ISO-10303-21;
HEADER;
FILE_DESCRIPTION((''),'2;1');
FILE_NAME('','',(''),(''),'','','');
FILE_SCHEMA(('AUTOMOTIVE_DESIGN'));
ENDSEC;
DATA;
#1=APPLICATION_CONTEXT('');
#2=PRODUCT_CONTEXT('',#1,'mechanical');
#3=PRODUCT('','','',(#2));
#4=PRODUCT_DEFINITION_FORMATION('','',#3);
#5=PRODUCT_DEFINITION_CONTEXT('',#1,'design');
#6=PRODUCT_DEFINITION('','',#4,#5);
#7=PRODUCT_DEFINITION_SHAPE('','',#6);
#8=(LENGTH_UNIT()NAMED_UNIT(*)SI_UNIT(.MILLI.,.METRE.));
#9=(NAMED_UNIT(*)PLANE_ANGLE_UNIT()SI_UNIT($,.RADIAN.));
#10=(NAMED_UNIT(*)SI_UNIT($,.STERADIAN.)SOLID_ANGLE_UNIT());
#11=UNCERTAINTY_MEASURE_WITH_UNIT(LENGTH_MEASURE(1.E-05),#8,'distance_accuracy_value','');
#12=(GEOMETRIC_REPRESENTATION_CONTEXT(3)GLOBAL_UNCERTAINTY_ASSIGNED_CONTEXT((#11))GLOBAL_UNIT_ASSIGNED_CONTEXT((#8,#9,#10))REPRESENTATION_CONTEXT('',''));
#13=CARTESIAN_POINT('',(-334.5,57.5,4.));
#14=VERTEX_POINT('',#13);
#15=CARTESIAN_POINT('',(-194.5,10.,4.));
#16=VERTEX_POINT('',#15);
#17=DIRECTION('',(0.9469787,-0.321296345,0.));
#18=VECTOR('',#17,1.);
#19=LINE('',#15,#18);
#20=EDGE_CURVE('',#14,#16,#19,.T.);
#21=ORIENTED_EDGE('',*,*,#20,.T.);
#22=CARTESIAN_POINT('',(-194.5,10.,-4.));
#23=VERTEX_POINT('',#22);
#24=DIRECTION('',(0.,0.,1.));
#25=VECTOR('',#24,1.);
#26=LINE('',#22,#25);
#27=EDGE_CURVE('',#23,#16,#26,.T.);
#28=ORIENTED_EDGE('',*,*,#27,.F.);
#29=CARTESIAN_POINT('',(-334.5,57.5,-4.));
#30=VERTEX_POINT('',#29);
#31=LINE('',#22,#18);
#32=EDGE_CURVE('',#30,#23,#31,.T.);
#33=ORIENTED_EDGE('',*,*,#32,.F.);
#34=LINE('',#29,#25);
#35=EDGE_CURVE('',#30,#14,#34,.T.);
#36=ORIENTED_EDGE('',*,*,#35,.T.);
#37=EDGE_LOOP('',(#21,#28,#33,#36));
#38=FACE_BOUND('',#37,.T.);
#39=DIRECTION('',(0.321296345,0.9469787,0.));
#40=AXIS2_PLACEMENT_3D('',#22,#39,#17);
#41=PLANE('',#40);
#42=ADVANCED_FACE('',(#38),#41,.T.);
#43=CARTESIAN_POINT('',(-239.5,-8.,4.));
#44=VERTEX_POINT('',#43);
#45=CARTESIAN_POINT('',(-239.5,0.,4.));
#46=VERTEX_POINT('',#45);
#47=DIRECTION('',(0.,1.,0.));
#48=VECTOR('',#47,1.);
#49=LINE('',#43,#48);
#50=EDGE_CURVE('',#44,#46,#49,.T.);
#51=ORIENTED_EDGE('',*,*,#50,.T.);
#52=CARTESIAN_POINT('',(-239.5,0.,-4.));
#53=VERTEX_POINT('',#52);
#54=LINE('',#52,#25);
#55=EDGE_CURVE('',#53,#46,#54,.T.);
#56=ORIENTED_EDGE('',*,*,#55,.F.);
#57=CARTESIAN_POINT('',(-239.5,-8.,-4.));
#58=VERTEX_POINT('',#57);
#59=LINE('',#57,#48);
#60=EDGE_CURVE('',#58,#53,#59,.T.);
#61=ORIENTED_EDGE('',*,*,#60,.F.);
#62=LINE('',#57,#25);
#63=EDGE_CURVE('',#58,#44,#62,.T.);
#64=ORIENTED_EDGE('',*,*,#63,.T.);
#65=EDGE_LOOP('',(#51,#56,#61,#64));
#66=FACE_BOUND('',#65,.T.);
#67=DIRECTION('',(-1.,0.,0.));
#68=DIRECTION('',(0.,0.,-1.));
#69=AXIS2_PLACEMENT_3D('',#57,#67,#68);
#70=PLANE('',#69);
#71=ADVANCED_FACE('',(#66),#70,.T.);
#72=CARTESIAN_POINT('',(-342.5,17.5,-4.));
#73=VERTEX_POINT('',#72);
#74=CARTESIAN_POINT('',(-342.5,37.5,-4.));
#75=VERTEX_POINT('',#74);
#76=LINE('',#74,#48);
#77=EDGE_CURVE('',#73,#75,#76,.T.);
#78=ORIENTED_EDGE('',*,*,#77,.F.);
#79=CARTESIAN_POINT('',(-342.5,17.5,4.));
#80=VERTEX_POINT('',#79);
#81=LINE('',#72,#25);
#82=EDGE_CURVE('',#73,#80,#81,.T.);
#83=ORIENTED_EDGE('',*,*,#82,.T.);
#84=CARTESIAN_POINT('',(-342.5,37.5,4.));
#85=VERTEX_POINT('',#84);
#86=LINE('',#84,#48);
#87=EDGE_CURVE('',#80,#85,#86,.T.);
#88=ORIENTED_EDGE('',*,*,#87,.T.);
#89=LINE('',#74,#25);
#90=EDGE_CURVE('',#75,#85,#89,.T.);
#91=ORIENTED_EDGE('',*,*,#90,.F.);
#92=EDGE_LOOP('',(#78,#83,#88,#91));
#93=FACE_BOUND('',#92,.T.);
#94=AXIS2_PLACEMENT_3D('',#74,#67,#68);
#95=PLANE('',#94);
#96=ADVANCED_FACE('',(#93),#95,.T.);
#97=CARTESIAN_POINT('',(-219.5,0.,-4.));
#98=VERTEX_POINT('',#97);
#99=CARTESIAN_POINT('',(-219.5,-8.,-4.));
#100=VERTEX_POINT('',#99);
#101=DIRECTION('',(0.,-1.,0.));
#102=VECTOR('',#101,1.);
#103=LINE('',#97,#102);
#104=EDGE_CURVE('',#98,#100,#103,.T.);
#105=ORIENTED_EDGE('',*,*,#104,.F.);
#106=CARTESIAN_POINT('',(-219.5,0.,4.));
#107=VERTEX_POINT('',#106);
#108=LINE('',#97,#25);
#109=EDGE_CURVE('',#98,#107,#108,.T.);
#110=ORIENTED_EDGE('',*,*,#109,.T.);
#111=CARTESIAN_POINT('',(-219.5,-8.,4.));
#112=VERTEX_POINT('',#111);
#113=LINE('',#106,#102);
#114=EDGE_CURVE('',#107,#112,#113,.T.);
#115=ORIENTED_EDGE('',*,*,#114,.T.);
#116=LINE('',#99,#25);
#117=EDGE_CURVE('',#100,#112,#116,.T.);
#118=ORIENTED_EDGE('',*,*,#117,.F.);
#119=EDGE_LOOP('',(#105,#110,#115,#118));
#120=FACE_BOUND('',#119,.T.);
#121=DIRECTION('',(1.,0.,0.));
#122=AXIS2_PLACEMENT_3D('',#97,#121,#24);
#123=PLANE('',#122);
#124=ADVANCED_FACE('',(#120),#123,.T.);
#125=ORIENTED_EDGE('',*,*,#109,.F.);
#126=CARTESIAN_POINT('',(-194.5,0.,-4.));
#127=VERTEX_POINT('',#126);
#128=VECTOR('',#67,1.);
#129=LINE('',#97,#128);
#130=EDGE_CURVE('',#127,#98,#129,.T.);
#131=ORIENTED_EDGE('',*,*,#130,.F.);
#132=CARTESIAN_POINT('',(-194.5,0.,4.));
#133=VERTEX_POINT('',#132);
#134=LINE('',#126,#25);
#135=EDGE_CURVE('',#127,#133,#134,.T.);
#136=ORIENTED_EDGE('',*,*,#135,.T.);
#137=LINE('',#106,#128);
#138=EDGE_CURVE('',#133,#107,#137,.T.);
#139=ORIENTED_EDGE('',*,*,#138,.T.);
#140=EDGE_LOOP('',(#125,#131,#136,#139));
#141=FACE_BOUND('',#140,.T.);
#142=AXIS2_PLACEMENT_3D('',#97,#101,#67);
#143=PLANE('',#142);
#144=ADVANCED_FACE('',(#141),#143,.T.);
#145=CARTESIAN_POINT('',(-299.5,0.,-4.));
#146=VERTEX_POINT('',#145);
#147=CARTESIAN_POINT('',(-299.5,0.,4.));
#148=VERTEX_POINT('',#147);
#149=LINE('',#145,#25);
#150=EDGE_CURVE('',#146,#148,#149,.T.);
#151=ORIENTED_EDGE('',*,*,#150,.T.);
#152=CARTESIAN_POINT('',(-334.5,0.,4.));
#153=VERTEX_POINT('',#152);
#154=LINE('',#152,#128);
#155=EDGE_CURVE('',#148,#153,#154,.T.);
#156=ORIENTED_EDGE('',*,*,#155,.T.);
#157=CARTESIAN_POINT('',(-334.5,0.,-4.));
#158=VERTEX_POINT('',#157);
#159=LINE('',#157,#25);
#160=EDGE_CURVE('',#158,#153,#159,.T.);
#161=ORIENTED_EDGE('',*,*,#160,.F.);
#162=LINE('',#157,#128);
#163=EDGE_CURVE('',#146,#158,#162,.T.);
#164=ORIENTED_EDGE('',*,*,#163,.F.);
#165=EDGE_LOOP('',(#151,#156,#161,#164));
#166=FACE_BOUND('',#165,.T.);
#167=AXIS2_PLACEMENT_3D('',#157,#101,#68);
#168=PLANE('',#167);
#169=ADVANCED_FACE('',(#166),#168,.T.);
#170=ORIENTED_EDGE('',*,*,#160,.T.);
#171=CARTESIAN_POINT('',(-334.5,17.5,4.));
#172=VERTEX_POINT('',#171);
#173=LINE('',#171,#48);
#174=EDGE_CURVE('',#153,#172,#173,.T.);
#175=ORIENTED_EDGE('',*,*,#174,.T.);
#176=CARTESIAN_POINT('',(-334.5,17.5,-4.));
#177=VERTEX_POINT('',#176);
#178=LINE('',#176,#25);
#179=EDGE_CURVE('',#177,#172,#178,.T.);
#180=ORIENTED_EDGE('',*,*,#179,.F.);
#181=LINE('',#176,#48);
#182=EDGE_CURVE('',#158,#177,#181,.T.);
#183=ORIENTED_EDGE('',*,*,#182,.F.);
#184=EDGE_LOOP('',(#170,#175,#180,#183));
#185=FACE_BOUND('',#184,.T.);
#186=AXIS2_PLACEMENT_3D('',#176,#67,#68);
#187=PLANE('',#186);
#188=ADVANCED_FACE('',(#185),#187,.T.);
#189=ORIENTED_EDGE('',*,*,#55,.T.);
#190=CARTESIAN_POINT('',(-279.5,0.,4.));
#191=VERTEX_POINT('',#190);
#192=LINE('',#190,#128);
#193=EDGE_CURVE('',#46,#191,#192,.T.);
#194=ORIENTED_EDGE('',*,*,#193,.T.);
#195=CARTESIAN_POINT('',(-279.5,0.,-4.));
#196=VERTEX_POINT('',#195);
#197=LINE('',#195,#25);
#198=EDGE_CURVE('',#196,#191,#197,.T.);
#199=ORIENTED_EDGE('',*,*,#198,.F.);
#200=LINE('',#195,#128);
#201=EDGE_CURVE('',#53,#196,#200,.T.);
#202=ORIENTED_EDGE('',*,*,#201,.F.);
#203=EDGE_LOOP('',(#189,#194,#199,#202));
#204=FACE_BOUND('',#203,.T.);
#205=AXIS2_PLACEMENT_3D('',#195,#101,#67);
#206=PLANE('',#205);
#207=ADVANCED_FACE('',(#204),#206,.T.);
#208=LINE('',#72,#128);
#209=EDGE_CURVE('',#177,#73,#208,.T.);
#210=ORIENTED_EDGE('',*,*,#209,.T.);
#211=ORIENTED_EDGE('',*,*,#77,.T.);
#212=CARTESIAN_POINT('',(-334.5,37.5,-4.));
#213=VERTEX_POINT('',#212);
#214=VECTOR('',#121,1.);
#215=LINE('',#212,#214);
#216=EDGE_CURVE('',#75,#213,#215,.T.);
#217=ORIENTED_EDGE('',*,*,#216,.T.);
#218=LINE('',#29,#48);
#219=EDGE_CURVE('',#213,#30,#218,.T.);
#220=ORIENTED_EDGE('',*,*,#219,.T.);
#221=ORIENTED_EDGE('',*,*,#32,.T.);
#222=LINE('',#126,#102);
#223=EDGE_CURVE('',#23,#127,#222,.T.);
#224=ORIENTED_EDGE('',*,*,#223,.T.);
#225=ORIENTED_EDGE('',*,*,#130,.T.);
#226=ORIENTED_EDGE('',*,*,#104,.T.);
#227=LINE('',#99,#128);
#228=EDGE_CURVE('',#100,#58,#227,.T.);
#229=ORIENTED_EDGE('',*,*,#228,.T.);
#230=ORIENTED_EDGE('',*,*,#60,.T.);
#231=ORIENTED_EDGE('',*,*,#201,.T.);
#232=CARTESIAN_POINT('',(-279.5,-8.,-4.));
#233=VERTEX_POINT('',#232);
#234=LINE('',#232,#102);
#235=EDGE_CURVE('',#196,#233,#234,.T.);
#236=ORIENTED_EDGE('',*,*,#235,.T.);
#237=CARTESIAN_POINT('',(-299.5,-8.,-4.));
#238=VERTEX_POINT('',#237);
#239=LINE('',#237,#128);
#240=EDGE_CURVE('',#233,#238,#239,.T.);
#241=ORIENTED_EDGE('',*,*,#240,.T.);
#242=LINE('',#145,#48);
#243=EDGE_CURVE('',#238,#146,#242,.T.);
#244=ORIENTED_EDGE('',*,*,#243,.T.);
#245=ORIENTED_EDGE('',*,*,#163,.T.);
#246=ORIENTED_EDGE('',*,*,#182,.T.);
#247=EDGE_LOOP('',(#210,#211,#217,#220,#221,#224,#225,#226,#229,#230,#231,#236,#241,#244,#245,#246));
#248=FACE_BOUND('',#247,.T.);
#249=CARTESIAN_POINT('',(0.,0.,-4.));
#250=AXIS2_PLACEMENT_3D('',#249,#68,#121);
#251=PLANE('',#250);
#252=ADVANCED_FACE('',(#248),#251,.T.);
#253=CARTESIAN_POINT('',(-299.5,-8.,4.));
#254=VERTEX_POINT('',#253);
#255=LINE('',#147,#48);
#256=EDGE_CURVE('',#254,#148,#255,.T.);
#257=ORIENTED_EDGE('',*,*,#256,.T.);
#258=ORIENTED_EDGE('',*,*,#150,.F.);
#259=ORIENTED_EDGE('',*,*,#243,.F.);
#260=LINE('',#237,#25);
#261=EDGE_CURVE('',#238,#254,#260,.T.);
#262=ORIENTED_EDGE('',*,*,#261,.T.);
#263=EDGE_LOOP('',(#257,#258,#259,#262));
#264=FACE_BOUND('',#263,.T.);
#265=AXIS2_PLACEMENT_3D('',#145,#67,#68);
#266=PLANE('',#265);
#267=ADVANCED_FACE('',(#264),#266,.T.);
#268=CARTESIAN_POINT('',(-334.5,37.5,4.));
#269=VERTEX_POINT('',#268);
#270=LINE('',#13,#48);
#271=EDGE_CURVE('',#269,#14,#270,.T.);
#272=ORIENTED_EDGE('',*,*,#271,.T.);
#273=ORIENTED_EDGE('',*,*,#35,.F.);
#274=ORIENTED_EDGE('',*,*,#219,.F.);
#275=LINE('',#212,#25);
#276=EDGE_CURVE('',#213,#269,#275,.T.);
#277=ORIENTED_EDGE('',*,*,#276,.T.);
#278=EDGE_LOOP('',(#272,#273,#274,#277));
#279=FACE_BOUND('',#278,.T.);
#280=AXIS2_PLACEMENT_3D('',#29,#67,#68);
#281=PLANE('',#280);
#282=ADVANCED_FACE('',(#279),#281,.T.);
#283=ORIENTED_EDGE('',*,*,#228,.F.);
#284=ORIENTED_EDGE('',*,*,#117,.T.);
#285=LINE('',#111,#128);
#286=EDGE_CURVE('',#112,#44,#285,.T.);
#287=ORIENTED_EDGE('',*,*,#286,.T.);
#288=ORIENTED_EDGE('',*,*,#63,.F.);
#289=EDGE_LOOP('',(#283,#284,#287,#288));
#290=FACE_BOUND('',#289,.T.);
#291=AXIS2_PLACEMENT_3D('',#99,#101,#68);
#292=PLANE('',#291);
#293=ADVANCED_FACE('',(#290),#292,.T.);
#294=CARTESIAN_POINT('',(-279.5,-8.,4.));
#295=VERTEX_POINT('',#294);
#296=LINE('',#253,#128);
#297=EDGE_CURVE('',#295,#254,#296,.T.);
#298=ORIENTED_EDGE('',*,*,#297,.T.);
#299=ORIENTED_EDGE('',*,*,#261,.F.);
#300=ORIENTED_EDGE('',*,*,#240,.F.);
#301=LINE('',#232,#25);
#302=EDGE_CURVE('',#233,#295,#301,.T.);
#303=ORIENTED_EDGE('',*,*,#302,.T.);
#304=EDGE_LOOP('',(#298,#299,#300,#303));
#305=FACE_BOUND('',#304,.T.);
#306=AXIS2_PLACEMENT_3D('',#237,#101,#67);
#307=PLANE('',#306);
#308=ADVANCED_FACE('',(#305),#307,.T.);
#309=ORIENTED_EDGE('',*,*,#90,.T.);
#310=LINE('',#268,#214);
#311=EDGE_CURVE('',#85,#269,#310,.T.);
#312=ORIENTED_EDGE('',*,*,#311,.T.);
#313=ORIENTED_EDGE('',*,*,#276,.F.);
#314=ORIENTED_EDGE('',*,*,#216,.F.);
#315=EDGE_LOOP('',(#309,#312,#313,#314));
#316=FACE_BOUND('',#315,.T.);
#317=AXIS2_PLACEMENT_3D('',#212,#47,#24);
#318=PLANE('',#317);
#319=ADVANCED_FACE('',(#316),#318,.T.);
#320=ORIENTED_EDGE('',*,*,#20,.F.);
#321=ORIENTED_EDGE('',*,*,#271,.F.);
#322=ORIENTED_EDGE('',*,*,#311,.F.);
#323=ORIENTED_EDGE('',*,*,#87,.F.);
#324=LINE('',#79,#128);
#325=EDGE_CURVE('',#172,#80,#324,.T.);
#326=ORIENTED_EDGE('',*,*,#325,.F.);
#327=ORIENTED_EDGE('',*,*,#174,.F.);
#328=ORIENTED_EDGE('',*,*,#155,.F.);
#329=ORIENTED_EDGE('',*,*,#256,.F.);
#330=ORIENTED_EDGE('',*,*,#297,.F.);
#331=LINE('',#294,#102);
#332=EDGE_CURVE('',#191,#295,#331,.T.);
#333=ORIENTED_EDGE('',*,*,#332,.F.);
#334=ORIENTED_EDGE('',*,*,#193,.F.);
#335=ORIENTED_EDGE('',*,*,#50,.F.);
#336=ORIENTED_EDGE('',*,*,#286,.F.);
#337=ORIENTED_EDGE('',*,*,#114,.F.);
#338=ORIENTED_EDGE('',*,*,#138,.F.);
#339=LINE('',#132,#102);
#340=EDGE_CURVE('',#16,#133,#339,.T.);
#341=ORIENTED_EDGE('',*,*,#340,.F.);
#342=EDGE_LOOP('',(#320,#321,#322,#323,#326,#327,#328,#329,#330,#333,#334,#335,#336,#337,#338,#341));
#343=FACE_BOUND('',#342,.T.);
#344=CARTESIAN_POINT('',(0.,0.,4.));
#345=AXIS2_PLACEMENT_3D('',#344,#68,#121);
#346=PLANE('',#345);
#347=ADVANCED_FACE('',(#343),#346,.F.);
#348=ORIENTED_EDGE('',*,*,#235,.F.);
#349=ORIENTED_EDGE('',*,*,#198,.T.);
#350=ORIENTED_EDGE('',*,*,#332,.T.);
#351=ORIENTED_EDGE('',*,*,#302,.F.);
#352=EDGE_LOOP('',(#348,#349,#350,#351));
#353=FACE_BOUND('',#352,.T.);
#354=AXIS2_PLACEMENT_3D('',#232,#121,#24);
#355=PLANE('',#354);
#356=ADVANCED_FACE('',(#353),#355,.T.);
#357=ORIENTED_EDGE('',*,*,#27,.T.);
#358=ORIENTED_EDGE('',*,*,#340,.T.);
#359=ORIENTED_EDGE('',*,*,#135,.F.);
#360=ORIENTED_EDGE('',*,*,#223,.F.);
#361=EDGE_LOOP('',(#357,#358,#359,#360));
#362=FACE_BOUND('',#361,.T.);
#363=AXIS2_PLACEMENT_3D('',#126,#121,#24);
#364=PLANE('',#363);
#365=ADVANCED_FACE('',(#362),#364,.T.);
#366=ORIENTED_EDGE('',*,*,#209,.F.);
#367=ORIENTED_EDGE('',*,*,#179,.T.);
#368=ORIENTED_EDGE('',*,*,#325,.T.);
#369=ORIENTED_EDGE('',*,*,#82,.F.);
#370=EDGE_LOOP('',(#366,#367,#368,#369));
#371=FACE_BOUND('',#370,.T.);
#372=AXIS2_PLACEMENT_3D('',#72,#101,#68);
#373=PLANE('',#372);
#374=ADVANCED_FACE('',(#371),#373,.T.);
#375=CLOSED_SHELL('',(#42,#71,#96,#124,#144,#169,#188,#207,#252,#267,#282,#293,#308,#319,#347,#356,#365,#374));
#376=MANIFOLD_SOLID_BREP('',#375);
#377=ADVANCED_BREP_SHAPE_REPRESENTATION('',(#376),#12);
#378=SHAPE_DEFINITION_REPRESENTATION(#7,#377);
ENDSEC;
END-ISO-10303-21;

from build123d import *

# Parameters (mm, degrees)
SKETCH1_W           = 685
SKETCH1_H           = 250
BASE_FLANGE1_DEPTH  = 8
SKETCH6_W           = 60
SKETCH6_H           = 8
SKETCH6_W_2         = 70
EXTRUDE1_DEPTH      = 8
SKETCH7_W           = 250
SKETCH7_H           = 73.5
BASE_FLANGE2_DEPTH  = 8
SKETCH12_W          = 30.5
SKETCH12_H          = 8.5
EXTRUDE2_DEPTH      = 699.681794525
SKETCH14_W          = 250
SKETCH14_H          = 8
BASE_FLANGE3_DEPTH  = 50.5
SKETCH19_W          = 60
SKETCH19_H          = 8
SKETCH19_W_2        = 70
EXTRUDE3_DEPTH      = 8
BREAK_CORNER1_START = 41.5
BREAK_CORNER1_DEPTH = 8
EXTRUDE4_DEPTH      = 8
BASE_FLANGE4_DEPTH  = 8
SKETCH38_W          = 8.5
SKETCH38_H          = 20.5
EXTRUDE5_DEPTH      = 10
SKETCH39_W          = 20.5
SKETCH39_H          = 8.5
EXTRUDE6_DEPTH      = 10


# Read off the part's stored shape, not the designer's step: Break-Corner1
# Sheet-metal steps are written as plain solids
with BuildPart() as part:
    # Sketch1 → Base-Flange1 (new body)
    with BuildSketch(Plane(origin=(0, 0, 0), x_dir=(1, 0, 0), z_dir=(0, 1, 0))):
        Rectangle(SKETCH1_W, SKETCH1_H)
    extrude(amount=-BASE_FLANGE1_DEPTH)

    # Sketch6 → Extrude1 (cut)
    with BuildSketch(Plane(origin=(342.5, 0, 0), x_dir=(0, 0, -1), z_dir=(1, 0, 0))):
        with Locations((-95, -4)):
            Rectangle(SKETCH6_W, SKETCH6_H)
        with Locations((95, -4)):
            Rectangle(SKETCH6_W, SKETCH6_H)
        with Locations((0, -4)):
            Rectangle(SKETCH6_W_2, SKETCH6_H)
    extrude1 = extrude(amount=-EXTRUDE1_DEPTH, mode=Mode.SUBTRACT)

    # Mirror1: Extrude1 across plane
    add(extrude1.mirror(Plane(origin=(0, 0, 0), x_dir=(0, 0, 1), z_dir=(1, 0, 0))), mode=Mode.SUBTRACT)

    # Sketch39 → Extrude6 (cut)
    with BuildSketch(Plane.XZ.offset(8)):
        with Locations((289.5, 0)):
            Rectangle(SKETCH39_W, SKETCH39_H)
        with Locations((229.5, 0)):
            Rectangle(SKETCH39_W, SKETCH39_H)
        with Locations((-289.5, 0)):
            Rectangle(SKETCH39_W, SKETCH39_H)
        with Locations((-229.5, 0)):
            Rectangle(SKETCH39_W, SKETCH39_H)
    extrude(amount=-EXTRUDE6_DEPTH, mode=Mode.SUBTRACT)


with BuildPart() as body_2:
    # Sketch7 → Base-Flange2 (new body)
    with BuildSketch(Plane(origin=(334.5, 0, 0), x_dir=(0, 0, -1), z_dir=(1, 0, 0))):
        with Locations((0, 20.75)):
            Rectangle(SKETCH7_W, SKETCH7_H)
    extrude(amount=BASE_FLANGE2_DEPTH)

    # Sketch12 → Extrude2 (cut, through all)
    with BuildSketch(Plane(origin=(342.5, 0, 0), x_dir=(0, 0, -1), z_dir=(1, 0, 0))):
        with Locations((-50, -4)):
            Rectangle(SKETCH12_W, SKETCH12_H)
        with Locations((50, -4)):
            Rectangle(SKETCH12_W, SKETCH12_H)
        with Locations((50, 45.5)):
            Rectangle(SKETCH12_W, SKETCH12_H)
        with Locations((-50, 45.5)):
            Rectangle(SKETCH12_W, SKETCH12_H)
    extrude(amount=-EXTRUDE2_DEPTH, mode=Mode.SUBTRACT)

    # Sketch38 → Extrude5 (cut)
    with BuildSketch(Plane(origin=(342.5, 0, 0), x_dir=(0, 0, -1), z_dir=(1, 0, 0))):
        with Locations((0, 27.5)):
            Rectangle(SKETCH38_W, SKETCH38_H)
    extrude(amount=-EXTRUDE5_DEPTH, mode=Mode.SUBTRACT)


with BuildPart() as body_3:
    # Sketch14 → Base-Flange3 (new body)
    with BuildSketch(Plane.ZY.offset(-334.5)):
        with Locations((0, 45.5)):
            Rectangle(SKETCH14_W, SKETCH14_H)
    extrude(amount=-BASE_FLANGE3_DEPTH)

    # Sketch19 → Extrude3 (cut)
    with BuildSketch(Plane(origin=(342.5, 0, 0), x_dir=(0, 0, -1), z_dir=(1, 0, 0))):
        with Locations((95, 45.5)):
            Rectangle(SKETCH19_W, SKETCH19_H)
        with Locations((0, 45.5)):
            Rectangle(SKETCH19_W_2, SKETCH19_H)
        with Locations((-95, 45.5)):
            Rectangle(SKETCH19_W, SKETCH19_H)
    extrude(amount=-EXTRUDE3_DEPTH, mode=Mode.SUBTRACT)

    # Break-Corner1 outline → Break-Corner1 (cut)
    with BuildSketch(Plane(origin=(0, 0, 0), x_dir=(1, 0, 0), z_dir=(0, 1, 0)).offset(BREAK_CORNER1_START)):
        Polygon((385, -125), (385, -110), (370, -125), align=None)
        Polygon((370, 125), (385, 110), (385, 125), align=None)
    extrude(amount=BREAK_CORNER1_DEPTH, mode=Mode.SUBTRACT)

    # Sketch20 → Extrude4 (cut)
    with BuildSketch(Plane(origin=(0, 49.5, 0), x_dir=(1, 0, 0), z_dir=(0, 1, 0))):
        with BuildLine():
            Line((367, 75), (367, 55))
            ThreePointArc((367, 55), (362.5, 50.5), (358, 55))
            Line((358, 55), (358, 75))
            ThreePointArc((358, 75), (362.5, 79.5), (367, 75))
        make_face()
        with BuildLine():
            Line((367, -75), (367, -55))
            ThreePointArc((367, -55), (362.5, -50.5), (358, -55))
            Line((358, -55), (358, -75))
            ThreePointArc((358, -75), (362.5, -79.5), (367, -75))
        make_face()
    extrude(amount=-EXTRUDE4_DEPTH, mode=Mode.SUBTRACT)


with BuildPart() as body_4:
    # Mirror4: mirrored copy
    add(body_3.part.mirror(Plane(origin=(0, 0, 0), x_dir=(0, 0, 1), z_dir=(1, 0, 0))))


with BuildPart() as body_5:
    # Sketch29 → Base-Flange4 (new body)
    with BuildSketch(Plane.XY.offset(4)):
        Polygon((219.5, 0), (219.5, -8), (239.5, -8), (239.5, 0), (279.5, 0), (279.5, -8), (299.5, -8), (299.5, 0), (334.5, 0), (334.5, 17.5), (342.5, 17.5), (342.5, 37.5), (334.5, 37.5), (334.5, 57.5), (194.5, 10), (194.5, 0), align=None)
    extrude(amount=-BASE_FLANGE4_DEPTH)


with BuildPart() as body_6:
    # Mirror5: mirrored copy
    add(body_5.part.mirror(Plane(origin=(0, 0, 0), x_dir=(0, 0, 1), z_dir=(1, 0, 0))))


with BuildPart() as body_7:
    # Mirror3: mirrored copy
    add(body_2.part.mirror(Plane(origin=(0, 0, 0), x_dir=(0, 0, 1), z_dir=(1, 0, 0))))


solid = body_6.part
